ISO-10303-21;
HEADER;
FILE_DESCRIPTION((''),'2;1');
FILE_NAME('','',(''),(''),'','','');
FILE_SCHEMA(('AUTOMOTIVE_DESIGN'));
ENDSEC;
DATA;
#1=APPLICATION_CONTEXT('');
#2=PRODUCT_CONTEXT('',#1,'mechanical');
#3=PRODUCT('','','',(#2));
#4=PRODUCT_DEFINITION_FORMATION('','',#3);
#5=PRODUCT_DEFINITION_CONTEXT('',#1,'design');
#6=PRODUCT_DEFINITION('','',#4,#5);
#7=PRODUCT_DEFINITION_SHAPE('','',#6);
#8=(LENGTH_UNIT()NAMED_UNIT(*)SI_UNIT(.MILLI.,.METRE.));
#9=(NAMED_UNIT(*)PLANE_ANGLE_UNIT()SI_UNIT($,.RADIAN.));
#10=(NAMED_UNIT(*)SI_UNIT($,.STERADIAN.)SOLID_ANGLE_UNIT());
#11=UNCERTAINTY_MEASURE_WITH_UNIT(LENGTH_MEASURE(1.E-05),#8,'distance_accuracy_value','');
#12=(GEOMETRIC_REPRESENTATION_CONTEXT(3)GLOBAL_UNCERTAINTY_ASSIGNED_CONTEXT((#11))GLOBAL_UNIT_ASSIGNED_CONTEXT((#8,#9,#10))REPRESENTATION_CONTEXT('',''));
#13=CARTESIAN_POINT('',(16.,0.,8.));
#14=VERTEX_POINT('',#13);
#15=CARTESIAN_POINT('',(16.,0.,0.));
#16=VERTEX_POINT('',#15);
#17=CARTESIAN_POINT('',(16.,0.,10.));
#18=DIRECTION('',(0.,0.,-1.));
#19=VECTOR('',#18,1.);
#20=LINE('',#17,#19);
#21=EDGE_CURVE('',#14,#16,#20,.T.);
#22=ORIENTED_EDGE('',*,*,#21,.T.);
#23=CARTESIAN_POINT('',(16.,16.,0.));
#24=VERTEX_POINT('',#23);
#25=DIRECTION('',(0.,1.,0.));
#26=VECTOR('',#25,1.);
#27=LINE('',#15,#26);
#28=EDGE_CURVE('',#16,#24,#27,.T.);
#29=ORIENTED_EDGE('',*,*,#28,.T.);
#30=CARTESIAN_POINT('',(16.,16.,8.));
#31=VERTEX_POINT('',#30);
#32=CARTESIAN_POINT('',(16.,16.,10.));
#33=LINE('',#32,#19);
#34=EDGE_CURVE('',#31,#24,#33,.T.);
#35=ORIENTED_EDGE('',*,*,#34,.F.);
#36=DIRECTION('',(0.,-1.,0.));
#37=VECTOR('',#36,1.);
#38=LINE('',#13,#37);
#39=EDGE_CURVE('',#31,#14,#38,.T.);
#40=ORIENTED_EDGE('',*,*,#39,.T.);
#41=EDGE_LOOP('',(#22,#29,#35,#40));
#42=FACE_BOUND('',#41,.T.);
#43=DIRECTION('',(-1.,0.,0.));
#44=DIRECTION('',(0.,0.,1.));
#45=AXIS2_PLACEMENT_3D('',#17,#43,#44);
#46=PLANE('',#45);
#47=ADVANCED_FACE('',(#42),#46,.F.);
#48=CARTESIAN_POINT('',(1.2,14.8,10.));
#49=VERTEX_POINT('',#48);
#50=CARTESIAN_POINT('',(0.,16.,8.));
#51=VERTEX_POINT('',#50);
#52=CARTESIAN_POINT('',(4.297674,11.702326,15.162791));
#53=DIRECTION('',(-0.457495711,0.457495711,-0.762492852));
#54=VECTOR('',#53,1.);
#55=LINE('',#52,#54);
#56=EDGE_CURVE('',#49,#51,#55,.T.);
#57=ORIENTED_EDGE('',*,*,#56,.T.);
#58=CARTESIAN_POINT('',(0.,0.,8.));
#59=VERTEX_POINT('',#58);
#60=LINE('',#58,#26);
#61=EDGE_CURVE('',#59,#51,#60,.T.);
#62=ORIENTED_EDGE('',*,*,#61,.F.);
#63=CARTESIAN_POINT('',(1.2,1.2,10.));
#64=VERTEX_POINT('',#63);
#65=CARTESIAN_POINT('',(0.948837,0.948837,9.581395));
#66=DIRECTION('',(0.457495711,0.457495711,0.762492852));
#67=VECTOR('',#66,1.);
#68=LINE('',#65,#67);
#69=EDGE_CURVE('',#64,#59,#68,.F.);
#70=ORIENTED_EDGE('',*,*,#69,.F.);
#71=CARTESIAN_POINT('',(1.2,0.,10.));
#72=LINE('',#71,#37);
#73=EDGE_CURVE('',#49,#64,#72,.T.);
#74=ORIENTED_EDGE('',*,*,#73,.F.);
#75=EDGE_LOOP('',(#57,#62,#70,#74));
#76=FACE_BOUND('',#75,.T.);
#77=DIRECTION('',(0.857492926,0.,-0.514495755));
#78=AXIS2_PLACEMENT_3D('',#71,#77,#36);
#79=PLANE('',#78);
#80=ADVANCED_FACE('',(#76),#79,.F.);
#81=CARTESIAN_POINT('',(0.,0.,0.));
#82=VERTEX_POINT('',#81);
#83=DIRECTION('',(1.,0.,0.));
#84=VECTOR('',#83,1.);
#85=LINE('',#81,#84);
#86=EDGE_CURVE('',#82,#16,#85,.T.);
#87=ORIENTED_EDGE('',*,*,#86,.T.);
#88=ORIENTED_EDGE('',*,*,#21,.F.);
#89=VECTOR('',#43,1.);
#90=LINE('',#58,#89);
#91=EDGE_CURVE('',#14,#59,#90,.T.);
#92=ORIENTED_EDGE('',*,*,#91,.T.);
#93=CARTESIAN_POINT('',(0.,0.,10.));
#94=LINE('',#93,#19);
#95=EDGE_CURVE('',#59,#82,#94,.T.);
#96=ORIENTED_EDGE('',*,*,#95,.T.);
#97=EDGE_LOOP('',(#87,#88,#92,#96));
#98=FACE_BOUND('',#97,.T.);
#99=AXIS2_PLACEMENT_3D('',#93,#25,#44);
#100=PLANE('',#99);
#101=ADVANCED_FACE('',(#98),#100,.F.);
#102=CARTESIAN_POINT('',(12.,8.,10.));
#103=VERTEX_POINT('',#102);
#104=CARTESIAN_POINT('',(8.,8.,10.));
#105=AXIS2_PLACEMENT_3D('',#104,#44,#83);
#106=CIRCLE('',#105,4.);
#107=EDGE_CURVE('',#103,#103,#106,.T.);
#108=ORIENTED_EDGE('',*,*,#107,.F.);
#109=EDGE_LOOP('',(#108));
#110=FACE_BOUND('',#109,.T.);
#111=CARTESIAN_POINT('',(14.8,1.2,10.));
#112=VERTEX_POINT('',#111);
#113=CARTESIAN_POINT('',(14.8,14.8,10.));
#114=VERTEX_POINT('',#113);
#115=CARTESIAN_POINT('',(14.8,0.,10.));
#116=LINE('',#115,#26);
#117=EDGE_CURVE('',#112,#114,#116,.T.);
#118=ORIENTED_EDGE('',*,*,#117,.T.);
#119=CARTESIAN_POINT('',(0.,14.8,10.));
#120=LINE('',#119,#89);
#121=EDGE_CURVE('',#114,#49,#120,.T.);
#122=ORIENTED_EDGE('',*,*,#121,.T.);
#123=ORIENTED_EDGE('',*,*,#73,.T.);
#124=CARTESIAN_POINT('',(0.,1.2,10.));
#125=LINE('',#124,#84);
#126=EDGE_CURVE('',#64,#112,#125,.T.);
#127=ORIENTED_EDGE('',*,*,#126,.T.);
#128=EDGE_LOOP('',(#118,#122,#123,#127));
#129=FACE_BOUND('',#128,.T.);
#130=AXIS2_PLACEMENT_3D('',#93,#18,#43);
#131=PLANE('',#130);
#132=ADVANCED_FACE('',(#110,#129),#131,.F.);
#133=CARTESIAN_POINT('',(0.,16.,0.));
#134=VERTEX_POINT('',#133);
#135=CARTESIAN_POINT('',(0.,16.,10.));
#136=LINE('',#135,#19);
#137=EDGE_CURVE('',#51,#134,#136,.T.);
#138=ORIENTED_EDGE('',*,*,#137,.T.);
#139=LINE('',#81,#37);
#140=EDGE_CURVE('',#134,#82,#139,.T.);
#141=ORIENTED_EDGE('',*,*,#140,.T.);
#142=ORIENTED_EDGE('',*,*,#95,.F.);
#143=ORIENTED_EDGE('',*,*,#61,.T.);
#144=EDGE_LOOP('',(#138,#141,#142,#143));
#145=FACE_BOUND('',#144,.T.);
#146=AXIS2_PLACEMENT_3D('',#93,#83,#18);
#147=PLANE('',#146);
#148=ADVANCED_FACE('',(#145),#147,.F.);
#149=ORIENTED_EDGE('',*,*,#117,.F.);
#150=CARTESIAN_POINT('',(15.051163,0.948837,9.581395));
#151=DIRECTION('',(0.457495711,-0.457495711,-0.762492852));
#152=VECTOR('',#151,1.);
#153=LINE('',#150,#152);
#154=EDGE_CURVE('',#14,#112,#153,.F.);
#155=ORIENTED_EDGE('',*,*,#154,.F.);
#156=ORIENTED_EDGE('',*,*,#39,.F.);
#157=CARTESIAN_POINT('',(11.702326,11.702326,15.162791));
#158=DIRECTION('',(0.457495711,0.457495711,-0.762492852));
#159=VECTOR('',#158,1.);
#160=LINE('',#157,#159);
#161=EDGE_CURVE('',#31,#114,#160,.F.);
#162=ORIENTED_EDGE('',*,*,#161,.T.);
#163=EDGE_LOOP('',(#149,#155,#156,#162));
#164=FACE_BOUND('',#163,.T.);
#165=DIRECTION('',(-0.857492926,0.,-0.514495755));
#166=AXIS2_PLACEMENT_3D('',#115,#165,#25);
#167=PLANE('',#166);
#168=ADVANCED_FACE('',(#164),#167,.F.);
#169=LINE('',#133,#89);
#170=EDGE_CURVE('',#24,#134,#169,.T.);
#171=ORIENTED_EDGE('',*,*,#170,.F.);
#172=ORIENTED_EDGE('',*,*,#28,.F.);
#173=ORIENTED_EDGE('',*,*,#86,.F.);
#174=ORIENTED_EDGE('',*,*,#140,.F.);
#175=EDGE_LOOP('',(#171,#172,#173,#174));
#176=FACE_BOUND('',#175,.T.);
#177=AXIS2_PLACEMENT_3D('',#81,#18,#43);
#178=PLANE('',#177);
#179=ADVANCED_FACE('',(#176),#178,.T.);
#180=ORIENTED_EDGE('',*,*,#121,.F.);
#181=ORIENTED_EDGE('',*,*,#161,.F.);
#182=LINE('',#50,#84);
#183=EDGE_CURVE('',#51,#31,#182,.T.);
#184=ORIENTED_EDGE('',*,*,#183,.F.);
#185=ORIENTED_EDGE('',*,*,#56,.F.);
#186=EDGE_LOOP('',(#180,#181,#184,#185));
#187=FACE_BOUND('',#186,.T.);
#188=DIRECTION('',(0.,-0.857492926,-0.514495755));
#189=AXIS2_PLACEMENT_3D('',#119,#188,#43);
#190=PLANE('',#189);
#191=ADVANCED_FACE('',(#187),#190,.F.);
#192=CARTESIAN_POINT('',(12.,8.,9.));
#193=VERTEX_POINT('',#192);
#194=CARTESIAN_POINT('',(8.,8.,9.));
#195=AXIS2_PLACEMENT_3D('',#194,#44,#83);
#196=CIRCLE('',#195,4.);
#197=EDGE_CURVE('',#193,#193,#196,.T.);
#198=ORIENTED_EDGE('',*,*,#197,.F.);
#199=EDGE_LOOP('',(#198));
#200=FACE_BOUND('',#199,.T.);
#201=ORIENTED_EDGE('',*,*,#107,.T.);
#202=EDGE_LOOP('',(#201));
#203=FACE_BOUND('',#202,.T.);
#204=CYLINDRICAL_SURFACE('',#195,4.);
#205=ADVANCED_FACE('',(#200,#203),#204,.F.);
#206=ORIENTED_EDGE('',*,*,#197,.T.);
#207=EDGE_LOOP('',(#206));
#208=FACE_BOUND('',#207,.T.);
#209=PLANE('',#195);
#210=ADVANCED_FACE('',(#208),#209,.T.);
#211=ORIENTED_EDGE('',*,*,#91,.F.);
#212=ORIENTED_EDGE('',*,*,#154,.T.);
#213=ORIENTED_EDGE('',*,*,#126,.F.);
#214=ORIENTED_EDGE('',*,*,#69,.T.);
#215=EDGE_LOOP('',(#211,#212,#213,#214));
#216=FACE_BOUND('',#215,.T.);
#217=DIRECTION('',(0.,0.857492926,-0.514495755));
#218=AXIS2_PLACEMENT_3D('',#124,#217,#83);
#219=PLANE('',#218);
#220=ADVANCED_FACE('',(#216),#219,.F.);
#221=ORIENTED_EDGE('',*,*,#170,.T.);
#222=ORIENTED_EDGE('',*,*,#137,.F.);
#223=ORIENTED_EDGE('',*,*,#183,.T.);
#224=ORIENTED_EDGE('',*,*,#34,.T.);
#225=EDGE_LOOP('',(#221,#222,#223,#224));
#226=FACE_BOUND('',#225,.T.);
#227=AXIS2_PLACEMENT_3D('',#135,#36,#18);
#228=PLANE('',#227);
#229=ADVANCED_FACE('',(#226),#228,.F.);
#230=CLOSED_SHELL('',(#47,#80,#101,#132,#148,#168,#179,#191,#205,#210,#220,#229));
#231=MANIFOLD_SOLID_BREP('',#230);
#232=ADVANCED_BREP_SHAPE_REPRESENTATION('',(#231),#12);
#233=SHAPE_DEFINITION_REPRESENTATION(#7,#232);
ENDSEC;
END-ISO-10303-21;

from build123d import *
from OCP.BRepFilletAPI import BRepFilletAPI_MakeChamfer

# Parameters (mm, degrees)
SKETCH1_W           = 16
SKETCH1_H           = 16
BOSS_EXTRUDE1_DEPTH = 10
SKETCH2_R           = 4
CUT_EXTRUDE1_DEPTH  = 1
FILLET4_SIZE        = 2
FILLET4_SIZE2       = 1.2


with BuildPart() as part:
    # Sketch1 → Boss-Extrude1 (new body)
    with BuildSketch(Plane.XY):
        with Locations((8, 8)):
            Rectangle(SKETCH1_W, SKETCH1_H)
    extrude(amount=BOSS_EXTRUDE1_DEPTH)

    # Sketch2 → Cut-Extrude1 (cut)
    with BuildSketch(Plane.XY.offset(10)):
        with Locations((8, 8)):
            Circle(SKETCH2_R)
    extrude(amount=-CUT_EXTRUDE1_DEPTH, mode=Mode.SUBTRACT)

    # Fillet4: one chamfer whose edges measure the first distance from different faces: ONE call of the kernel's chamfer builder (chamfer() names one face for all edges)
    fillet4_edges_1 = [part.edges().sort_by_distance(p)[0] for p in [
        (16, 8, 10),
    ]]
    fillet4_side_1 = [part.faces().sort_by_distance(p)[0] for p in [
        (16, 8, 5),
    ]]
    fillet4_edges_2 = [part.edges().sort_by_distance(p)[0] for p in [
        (8, 16, 10),
    ]]
    fillet4_side_2 = [part.faces().sort_by_distance(p)[0] for p in [
        (8, 16, 5),
    ]]
    fillet4_edges_3 = [part.edges().sort_by_distance(p)[0] for p in [
        (0, 8, 10),
    ]]
    fillet4_side_3 = [part.faces().sort_by_distance(p)[0] for p in [
        (0, 8, 5),
    ]]
    fillet4_edges_4 = [part.edges().sort_by_distance(p)[0] for p in [
        (8, 0, 10),
    ]]
    fillet4_side_4 = [part.faces().sort_by_distance(p)[0] for p in [
        (8, 0, 5),
    ]]
    fillet4 = BRepFilletAPI_MakeChamfer(part.part.solid().wrapped)
    for e in fillet4_edges_1:
        fillet4.Add(FILLET4_SIZE, FILLET4_SIZE2, e.wrapped, fillet4_side_1[0].wrapped)  # the first distance lies on this face
    for e in fillet4_edges_2:
        fillet4.Add(FILLET4_SIZE, FILLET4_SIZE2, e.wrapped, fillet4_side_2[0].wrapped)  # the first distance lies on this face
    for e in fillet4_edges_3:
        fillet4.Add(FILLET4_SIZE, FILLET4_SIZE2, e.wrapped, fillet4_side_3[0].wrapped)  # the first distance lies on this face
    for e in fillet4_edges_4:
        fillet4.Add(FILLET4_SIZE, FILLET4_SIZE2, e.wrapped, fillet4_side_4[0].wrapped)  # the first distance lies on this face
    add(Compound.cast(fillet4.Shape()), mode=Mode.REPLACE)


solid = part.part
